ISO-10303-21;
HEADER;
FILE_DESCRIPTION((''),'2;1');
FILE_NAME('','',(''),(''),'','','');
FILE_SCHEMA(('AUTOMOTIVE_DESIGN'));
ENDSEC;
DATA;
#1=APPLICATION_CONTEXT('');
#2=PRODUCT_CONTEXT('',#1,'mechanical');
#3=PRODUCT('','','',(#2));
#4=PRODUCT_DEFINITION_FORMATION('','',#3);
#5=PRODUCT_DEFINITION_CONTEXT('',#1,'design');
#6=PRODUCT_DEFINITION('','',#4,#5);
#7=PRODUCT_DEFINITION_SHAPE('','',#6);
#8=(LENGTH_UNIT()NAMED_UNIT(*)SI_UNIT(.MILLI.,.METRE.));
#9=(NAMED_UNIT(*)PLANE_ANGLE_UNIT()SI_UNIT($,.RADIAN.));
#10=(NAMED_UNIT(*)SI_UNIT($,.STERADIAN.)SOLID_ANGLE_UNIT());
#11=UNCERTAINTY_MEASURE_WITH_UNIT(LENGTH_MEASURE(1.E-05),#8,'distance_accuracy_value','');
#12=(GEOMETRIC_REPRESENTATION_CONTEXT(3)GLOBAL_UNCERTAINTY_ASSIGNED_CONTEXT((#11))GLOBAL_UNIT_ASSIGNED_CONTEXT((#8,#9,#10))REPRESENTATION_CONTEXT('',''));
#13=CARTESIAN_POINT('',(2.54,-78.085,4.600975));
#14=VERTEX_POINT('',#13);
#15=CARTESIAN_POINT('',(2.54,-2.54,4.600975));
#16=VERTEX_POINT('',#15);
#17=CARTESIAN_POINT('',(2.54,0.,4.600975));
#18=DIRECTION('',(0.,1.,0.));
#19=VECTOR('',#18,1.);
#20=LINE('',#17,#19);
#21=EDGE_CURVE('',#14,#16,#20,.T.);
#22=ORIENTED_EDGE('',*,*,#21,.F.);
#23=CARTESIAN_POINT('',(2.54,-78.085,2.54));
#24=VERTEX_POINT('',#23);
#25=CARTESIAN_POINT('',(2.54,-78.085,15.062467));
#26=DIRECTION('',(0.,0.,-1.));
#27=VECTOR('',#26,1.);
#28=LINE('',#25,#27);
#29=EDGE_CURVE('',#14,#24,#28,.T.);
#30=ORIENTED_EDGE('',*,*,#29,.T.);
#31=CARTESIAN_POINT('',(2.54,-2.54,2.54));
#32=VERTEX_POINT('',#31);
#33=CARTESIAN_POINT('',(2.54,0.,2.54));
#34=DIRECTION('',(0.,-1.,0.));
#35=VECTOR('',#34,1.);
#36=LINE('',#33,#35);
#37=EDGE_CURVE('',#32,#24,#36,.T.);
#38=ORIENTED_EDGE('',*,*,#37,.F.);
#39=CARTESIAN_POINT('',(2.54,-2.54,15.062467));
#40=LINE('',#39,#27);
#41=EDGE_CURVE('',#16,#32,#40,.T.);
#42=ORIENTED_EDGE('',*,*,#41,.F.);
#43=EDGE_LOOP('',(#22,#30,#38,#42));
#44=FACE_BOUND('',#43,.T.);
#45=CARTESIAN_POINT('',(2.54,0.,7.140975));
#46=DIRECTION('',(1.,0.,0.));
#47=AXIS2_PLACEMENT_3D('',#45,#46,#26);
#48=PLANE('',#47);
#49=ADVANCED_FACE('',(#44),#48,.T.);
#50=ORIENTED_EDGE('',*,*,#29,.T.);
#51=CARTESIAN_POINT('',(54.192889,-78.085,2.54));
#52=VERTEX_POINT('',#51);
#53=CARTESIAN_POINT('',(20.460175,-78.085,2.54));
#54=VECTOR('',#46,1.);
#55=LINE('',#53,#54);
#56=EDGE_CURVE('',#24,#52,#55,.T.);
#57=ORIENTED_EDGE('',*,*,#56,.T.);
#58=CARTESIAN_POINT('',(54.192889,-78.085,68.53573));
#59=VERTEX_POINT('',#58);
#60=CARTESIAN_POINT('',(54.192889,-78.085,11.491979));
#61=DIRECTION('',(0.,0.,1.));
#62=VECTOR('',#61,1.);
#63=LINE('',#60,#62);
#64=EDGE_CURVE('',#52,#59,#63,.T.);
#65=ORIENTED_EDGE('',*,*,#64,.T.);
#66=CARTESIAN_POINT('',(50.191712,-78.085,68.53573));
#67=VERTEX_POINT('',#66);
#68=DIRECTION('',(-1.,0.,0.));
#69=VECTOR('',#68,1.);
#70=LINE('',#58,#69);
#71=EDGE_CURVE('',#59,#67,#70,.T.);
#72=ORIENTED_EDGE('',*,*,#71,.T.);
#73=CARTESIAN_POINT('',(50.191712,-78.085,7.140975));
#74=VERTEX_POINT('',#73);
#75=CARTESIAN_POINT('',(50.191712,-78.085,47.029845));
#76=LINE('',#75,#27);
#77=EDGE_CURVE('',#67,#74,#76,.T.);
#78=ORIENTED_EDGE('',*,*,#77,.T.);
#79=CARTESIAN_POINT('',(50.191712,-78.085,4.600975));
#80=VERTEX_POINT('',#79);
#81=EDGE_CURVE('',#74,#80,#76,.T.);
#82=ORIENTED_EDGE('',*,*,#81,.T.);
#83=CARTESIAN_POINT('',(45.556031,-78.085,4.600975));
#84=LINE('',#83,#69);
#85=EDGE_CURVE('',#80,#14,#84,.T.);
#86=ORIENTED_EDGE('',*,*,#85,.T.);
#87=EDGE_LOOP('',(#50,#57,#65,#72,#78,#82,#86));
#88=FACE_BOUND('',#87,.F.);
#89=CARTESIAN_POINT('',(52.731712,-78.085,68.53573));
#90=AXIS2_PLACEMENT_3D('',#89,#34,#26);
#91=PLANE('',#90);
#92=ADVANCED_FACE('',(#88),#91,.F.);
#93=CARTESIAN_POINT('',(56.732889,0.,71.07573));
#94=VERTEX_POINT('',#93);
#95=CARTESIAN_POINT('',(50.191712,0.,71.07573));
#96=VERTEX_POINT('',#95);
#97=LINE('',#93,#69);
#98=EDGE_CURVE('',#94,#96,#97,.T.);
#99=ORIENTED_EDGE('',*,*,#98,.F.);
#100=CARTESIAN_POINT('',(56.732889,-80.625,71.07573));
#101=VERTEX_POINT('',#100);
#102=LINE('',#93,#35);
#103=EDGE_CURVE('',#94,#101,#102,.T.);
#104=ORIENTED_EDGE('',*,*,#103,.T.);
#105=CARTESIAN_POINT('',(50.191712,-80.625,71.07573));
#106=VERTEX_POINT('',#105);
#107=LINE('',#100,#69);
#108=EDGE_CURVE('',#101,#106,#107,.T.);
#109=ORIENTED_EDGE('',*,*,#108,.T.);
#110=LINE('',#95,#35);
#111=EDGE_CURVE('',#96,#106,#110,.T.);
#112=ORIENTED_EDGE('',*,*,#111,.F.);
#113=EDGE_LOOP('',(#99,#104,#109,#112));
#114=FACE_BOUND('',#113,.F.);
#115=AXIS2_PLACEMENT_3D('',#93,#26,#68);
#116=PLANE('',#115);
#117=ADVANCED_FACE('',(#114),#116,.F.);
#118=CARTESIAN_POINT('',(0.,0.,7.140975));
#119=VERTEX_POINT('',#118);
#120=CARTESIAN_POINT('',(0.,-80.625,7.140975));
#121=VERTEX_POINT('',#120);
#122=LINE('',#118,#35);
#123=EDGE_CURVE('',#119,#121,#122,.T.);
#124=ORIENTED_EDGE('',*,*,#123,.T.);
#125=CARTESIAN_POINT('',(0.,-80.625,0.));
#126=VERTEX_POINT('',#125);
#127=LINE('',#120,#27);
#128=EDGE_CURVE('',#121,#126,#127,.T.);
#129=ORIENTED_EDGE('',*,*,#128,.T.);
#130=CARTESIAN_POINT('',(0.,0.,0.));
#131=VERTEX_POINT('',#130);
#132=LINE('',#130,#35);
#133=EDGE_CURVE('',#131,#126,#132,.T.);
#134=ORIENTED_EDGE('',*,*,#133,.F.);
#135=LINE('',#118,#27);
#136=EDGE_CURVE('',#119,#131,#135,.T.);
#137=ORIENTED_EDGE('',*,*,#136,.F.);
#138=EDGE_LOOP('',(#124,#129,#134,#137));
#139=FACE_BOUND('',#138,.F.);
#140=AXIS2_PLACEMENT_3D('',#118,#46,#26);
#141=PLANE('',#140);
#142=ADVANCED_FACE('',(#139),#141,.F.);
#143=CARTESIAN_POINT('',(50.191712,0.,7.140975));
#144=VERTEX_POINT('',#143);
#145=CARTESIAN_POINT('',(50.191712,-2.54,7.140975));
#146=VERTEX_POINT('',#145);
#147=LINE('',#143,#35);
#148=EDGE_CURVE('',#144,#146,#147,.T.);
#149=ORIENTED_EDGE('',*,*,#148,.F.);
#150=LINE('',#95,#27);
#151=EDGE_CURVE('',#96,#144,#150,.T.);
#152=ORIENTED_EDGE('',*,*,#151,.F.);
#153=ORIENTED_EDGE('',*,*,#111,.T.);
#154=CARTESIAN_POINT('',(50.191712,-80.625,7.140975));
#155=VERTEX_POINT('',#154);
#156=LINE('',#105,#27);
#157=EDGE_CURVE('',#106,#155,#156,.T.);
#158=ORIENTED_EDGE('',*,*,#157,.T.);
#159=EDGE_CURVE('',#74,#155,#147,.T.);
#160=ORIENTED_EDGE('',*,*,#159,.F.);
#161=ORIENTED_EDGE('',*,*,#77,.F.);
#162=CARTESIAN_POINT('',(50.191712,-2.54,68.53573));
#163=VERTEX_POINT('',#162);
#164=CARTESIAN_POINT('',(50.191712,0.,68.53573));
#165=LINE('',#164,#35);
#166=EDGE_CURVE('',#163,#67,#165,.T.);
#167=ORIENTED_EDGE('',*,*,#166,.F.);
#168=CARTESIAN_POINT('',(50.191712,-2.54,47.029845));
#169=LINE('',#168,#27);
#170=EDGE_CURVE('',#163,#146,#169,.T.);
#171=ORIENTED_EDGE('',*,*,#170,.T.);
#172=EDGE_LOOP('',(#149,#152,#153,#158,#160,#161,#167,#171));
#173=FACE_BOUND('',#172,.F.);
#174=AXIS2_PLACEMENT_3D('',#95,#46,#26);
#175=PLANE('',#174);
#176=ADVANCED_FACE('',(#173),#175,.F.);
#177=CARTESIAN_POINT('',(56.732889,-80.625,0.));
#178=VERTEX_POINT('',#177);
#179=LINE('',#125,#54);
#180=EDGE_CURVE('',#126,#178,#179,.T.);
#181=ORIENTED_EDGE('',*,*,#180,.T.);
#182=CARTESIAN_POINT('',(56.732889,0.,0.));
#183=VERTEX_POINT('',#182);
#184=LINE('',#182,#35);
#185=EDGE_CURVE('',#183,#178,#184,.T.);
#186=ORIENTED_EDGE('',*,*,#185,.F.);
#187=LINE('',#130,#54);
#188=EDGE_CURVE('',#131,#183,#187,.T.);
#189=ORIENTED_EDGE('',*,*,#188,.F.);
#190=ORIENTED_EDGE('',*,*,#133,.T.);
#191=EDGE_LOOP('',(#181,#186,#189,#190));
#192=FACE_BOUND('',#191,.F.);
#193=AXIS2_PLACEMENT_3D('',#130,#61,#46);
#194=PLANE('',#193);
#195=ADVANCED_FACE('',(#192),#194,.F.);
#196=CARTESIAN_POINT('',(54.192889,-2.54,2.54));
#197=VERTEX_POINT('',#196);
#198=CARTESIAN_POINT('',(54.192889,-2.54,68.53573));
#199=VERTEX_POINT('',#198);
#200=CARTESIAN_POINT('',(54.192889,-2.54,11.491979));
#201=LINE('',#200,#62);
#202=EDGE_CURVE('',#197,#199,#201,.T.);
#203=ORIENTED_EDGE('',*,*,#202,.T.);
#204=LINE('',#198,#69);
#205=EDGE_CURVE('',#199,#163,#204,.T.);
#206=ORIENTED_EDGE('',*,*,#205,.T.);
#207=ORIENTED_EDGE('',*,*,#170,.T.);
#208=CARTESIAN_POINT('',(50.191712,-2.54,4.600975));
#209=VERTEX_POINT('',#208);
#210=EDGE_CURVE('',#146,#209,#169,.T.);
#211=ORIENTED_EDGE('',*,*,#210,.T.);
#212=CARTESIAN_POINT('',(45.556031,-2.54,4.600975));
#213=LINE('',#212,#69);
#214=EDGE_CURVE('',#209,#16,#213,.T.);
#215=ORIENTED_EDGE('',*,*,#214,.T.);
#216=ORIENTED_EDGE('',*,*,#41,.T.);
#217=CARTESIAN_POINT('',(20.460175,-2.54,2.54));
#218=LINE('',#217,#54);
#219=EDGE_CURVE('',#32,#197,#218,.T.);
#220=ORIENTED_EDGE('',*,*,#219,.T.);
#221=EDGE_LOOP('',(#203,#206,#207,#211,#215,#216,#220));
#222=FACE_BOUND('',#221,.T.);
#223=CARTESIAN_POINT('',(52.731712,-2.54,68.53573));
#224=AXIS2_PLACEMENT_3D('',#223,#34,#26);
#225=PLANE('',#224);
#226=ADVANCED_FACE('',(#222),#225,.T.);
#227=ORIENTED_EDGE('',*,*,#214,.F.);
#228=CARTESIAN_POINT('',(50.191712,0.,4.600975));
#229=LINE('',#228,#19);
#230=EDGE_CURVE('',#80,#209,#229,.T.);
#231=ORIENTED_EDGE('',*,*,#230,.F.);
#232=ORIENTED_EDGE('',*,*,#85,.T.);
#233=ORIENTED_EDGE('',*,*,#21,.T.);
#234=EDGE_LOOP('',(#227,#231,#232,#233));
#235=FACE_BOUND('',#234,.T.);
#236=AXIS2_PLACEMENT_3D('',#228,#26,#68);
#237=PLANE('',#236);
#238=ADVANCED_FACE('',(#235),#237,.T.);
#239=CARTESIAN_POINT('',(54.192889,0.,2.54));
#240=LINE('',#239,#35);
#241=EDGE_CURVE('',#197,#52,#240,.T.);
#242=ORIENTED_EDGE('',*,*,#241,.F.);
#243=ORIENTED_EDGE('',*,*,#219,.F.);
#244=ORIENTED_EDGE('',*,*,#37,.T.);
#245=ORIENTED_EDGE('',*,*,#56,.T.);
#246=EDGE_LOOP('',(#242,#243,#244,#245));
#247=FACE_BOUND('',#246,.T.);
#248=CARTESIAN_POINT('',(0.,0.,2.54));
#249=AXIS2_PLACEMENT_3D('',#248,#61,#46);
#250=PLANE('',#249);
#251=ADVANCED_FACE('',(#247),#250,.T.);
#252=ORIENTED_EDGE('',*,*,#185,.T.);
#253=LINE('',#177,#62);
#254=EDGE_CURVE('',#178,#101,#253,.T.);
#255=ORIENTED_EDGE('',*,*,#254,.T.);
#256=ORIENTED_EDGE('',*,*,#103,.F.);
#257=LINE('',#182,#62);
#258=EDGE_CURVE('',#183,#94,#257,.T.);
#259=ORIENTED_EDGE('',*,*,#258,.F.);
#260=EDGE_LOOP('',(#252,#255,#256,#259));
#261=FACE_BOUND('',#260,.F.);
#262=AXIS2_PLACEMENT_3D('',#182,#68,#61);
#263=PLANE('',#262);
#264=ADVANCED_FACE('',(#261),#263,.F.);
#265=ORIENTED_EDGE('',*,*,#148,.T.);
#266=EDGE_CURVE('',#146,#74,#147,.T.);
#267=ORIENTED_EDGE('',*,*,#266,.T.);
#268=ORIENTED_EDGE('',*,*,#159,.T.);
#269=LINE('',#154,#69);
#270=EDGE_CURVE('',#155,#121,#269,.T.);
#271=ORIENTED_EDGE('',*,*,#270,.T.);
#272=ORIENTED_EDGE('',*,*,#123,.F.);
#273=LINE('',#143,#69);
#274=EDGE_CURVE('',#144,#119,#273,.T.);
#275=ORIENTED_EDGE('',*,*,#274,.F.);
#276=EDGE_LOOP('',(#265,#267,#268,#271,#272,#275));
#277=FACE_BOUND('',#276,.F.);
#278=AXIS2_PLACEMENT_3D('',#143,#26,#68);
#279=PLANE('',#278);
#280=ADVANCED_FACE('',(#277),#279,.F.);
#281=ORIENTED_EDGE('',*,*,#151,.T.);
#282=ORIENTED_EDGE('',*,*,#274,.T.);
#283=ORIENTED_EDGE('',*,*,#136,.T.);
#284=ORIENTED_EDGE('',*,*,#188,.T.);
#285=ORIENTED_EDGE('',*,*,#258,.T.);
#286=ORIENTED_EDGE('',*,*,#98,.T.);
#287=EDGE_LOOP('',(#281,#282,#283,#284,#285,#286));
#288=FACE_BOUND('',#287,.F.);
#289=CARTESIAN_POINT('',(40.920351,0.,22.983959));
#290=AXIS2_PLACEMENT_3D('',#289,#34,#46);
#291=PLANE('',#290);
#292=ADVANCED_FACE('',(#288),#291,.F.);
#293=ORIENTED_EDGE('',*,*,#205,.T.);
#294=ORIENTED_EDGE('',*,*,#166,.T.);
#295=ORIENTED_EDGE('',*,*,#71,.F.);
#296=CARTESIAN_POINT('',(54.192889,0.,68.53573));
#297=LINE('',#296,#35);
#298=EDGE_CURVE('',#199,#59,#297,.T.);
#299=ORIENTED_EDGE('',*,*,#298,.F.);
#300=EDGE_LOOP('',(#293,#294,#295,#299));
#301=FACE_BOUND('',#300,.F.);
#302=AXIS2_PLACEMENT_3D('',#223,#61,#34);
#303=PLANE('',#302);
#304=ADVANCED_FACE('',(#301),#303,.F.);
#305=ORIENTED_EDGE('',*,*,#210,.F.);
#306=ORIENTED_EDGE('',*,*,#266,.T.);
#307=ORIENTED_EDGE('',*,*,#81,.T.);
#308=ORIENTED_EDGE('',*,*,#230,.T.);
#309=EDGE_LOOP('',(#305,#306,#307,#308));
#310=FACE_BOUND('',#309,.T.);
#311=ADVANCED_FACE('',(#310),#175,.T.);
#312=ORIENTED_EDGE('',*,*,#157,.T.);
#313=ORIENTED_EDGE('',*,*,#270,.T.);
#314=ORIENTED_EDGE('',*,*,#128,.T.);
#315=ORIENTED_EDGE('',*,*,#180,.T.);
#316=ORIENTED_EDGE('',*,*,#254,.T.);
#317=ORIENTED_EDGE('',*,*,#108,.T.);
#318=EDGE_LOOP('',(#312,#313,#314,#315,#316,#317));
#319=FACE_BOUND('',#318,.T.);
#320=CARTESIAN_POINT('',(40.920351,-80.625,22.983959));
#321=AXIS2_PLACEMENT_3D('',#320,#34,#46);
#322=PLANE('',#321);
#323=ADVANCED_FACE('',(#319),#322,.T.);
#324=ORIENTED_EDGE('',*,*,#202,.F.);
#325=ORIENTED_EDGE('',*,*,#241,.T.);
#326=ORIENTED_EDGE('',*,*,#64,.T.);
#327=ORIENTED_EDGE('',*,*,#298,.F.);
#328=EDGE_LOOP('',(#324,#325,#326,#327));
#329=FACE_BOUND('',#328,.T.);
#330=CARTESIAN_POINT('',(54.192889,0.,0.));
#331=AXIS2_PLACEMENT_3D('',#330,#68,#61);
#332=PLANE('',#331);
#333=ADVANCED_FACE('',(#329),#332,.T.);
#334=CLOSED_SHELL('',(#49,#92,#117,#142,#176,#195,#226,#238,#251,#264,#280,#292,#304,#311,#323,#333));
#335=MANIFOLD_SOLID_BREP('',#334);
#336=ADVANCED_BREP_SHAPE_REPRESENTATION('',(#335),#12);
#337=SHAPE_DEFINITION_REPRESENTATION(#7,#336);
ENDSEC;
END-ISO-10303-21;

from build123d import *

# Parameters (mm, degrees)
F1_DEPTH = 80.625
F2_T     = -2.54


# Not quite as in the source:
# - a shell that OpenCascade refuses in one call is made with other operations: the cavity is built on its own and cut out


with BuildPart() as f1:
    # F0 (on Front) → F1 (new body)
    with BuildSketch(Plane.XZ):
        Polygon((0, 7.1409749798), (0, 0), (56.7328892648, 0), (56.7328892648, 71.0757300258), (50.1917116344, 71.0757300258), (50.1917116344, 7.1409749798), align=None)
    extrude(amount=F1_DEPTH)

    # F2: a shell. OpenCascade refuses it in one call, so the cavity is built on its own and cut out:
    # the body offset inwards by the wall thickness, plus a prism from it out through each open face.
    f2_core = offset(f1.part, amount=F2_T, kind=Kind.INTERSECTION, mode=Mode.PRIVATE)
    f2_exits = [f2_core.faces().sort_by_distance(p)[0] for p in [
        (52.731712, -40.3125, 36.568353),
    ]]
    add(f2_core, mode=Mode.SUBTRACT)
    extrude(f2_exits, amount=-F2_T, mode=Mode.SUBTRACT)


solid = f1.part
